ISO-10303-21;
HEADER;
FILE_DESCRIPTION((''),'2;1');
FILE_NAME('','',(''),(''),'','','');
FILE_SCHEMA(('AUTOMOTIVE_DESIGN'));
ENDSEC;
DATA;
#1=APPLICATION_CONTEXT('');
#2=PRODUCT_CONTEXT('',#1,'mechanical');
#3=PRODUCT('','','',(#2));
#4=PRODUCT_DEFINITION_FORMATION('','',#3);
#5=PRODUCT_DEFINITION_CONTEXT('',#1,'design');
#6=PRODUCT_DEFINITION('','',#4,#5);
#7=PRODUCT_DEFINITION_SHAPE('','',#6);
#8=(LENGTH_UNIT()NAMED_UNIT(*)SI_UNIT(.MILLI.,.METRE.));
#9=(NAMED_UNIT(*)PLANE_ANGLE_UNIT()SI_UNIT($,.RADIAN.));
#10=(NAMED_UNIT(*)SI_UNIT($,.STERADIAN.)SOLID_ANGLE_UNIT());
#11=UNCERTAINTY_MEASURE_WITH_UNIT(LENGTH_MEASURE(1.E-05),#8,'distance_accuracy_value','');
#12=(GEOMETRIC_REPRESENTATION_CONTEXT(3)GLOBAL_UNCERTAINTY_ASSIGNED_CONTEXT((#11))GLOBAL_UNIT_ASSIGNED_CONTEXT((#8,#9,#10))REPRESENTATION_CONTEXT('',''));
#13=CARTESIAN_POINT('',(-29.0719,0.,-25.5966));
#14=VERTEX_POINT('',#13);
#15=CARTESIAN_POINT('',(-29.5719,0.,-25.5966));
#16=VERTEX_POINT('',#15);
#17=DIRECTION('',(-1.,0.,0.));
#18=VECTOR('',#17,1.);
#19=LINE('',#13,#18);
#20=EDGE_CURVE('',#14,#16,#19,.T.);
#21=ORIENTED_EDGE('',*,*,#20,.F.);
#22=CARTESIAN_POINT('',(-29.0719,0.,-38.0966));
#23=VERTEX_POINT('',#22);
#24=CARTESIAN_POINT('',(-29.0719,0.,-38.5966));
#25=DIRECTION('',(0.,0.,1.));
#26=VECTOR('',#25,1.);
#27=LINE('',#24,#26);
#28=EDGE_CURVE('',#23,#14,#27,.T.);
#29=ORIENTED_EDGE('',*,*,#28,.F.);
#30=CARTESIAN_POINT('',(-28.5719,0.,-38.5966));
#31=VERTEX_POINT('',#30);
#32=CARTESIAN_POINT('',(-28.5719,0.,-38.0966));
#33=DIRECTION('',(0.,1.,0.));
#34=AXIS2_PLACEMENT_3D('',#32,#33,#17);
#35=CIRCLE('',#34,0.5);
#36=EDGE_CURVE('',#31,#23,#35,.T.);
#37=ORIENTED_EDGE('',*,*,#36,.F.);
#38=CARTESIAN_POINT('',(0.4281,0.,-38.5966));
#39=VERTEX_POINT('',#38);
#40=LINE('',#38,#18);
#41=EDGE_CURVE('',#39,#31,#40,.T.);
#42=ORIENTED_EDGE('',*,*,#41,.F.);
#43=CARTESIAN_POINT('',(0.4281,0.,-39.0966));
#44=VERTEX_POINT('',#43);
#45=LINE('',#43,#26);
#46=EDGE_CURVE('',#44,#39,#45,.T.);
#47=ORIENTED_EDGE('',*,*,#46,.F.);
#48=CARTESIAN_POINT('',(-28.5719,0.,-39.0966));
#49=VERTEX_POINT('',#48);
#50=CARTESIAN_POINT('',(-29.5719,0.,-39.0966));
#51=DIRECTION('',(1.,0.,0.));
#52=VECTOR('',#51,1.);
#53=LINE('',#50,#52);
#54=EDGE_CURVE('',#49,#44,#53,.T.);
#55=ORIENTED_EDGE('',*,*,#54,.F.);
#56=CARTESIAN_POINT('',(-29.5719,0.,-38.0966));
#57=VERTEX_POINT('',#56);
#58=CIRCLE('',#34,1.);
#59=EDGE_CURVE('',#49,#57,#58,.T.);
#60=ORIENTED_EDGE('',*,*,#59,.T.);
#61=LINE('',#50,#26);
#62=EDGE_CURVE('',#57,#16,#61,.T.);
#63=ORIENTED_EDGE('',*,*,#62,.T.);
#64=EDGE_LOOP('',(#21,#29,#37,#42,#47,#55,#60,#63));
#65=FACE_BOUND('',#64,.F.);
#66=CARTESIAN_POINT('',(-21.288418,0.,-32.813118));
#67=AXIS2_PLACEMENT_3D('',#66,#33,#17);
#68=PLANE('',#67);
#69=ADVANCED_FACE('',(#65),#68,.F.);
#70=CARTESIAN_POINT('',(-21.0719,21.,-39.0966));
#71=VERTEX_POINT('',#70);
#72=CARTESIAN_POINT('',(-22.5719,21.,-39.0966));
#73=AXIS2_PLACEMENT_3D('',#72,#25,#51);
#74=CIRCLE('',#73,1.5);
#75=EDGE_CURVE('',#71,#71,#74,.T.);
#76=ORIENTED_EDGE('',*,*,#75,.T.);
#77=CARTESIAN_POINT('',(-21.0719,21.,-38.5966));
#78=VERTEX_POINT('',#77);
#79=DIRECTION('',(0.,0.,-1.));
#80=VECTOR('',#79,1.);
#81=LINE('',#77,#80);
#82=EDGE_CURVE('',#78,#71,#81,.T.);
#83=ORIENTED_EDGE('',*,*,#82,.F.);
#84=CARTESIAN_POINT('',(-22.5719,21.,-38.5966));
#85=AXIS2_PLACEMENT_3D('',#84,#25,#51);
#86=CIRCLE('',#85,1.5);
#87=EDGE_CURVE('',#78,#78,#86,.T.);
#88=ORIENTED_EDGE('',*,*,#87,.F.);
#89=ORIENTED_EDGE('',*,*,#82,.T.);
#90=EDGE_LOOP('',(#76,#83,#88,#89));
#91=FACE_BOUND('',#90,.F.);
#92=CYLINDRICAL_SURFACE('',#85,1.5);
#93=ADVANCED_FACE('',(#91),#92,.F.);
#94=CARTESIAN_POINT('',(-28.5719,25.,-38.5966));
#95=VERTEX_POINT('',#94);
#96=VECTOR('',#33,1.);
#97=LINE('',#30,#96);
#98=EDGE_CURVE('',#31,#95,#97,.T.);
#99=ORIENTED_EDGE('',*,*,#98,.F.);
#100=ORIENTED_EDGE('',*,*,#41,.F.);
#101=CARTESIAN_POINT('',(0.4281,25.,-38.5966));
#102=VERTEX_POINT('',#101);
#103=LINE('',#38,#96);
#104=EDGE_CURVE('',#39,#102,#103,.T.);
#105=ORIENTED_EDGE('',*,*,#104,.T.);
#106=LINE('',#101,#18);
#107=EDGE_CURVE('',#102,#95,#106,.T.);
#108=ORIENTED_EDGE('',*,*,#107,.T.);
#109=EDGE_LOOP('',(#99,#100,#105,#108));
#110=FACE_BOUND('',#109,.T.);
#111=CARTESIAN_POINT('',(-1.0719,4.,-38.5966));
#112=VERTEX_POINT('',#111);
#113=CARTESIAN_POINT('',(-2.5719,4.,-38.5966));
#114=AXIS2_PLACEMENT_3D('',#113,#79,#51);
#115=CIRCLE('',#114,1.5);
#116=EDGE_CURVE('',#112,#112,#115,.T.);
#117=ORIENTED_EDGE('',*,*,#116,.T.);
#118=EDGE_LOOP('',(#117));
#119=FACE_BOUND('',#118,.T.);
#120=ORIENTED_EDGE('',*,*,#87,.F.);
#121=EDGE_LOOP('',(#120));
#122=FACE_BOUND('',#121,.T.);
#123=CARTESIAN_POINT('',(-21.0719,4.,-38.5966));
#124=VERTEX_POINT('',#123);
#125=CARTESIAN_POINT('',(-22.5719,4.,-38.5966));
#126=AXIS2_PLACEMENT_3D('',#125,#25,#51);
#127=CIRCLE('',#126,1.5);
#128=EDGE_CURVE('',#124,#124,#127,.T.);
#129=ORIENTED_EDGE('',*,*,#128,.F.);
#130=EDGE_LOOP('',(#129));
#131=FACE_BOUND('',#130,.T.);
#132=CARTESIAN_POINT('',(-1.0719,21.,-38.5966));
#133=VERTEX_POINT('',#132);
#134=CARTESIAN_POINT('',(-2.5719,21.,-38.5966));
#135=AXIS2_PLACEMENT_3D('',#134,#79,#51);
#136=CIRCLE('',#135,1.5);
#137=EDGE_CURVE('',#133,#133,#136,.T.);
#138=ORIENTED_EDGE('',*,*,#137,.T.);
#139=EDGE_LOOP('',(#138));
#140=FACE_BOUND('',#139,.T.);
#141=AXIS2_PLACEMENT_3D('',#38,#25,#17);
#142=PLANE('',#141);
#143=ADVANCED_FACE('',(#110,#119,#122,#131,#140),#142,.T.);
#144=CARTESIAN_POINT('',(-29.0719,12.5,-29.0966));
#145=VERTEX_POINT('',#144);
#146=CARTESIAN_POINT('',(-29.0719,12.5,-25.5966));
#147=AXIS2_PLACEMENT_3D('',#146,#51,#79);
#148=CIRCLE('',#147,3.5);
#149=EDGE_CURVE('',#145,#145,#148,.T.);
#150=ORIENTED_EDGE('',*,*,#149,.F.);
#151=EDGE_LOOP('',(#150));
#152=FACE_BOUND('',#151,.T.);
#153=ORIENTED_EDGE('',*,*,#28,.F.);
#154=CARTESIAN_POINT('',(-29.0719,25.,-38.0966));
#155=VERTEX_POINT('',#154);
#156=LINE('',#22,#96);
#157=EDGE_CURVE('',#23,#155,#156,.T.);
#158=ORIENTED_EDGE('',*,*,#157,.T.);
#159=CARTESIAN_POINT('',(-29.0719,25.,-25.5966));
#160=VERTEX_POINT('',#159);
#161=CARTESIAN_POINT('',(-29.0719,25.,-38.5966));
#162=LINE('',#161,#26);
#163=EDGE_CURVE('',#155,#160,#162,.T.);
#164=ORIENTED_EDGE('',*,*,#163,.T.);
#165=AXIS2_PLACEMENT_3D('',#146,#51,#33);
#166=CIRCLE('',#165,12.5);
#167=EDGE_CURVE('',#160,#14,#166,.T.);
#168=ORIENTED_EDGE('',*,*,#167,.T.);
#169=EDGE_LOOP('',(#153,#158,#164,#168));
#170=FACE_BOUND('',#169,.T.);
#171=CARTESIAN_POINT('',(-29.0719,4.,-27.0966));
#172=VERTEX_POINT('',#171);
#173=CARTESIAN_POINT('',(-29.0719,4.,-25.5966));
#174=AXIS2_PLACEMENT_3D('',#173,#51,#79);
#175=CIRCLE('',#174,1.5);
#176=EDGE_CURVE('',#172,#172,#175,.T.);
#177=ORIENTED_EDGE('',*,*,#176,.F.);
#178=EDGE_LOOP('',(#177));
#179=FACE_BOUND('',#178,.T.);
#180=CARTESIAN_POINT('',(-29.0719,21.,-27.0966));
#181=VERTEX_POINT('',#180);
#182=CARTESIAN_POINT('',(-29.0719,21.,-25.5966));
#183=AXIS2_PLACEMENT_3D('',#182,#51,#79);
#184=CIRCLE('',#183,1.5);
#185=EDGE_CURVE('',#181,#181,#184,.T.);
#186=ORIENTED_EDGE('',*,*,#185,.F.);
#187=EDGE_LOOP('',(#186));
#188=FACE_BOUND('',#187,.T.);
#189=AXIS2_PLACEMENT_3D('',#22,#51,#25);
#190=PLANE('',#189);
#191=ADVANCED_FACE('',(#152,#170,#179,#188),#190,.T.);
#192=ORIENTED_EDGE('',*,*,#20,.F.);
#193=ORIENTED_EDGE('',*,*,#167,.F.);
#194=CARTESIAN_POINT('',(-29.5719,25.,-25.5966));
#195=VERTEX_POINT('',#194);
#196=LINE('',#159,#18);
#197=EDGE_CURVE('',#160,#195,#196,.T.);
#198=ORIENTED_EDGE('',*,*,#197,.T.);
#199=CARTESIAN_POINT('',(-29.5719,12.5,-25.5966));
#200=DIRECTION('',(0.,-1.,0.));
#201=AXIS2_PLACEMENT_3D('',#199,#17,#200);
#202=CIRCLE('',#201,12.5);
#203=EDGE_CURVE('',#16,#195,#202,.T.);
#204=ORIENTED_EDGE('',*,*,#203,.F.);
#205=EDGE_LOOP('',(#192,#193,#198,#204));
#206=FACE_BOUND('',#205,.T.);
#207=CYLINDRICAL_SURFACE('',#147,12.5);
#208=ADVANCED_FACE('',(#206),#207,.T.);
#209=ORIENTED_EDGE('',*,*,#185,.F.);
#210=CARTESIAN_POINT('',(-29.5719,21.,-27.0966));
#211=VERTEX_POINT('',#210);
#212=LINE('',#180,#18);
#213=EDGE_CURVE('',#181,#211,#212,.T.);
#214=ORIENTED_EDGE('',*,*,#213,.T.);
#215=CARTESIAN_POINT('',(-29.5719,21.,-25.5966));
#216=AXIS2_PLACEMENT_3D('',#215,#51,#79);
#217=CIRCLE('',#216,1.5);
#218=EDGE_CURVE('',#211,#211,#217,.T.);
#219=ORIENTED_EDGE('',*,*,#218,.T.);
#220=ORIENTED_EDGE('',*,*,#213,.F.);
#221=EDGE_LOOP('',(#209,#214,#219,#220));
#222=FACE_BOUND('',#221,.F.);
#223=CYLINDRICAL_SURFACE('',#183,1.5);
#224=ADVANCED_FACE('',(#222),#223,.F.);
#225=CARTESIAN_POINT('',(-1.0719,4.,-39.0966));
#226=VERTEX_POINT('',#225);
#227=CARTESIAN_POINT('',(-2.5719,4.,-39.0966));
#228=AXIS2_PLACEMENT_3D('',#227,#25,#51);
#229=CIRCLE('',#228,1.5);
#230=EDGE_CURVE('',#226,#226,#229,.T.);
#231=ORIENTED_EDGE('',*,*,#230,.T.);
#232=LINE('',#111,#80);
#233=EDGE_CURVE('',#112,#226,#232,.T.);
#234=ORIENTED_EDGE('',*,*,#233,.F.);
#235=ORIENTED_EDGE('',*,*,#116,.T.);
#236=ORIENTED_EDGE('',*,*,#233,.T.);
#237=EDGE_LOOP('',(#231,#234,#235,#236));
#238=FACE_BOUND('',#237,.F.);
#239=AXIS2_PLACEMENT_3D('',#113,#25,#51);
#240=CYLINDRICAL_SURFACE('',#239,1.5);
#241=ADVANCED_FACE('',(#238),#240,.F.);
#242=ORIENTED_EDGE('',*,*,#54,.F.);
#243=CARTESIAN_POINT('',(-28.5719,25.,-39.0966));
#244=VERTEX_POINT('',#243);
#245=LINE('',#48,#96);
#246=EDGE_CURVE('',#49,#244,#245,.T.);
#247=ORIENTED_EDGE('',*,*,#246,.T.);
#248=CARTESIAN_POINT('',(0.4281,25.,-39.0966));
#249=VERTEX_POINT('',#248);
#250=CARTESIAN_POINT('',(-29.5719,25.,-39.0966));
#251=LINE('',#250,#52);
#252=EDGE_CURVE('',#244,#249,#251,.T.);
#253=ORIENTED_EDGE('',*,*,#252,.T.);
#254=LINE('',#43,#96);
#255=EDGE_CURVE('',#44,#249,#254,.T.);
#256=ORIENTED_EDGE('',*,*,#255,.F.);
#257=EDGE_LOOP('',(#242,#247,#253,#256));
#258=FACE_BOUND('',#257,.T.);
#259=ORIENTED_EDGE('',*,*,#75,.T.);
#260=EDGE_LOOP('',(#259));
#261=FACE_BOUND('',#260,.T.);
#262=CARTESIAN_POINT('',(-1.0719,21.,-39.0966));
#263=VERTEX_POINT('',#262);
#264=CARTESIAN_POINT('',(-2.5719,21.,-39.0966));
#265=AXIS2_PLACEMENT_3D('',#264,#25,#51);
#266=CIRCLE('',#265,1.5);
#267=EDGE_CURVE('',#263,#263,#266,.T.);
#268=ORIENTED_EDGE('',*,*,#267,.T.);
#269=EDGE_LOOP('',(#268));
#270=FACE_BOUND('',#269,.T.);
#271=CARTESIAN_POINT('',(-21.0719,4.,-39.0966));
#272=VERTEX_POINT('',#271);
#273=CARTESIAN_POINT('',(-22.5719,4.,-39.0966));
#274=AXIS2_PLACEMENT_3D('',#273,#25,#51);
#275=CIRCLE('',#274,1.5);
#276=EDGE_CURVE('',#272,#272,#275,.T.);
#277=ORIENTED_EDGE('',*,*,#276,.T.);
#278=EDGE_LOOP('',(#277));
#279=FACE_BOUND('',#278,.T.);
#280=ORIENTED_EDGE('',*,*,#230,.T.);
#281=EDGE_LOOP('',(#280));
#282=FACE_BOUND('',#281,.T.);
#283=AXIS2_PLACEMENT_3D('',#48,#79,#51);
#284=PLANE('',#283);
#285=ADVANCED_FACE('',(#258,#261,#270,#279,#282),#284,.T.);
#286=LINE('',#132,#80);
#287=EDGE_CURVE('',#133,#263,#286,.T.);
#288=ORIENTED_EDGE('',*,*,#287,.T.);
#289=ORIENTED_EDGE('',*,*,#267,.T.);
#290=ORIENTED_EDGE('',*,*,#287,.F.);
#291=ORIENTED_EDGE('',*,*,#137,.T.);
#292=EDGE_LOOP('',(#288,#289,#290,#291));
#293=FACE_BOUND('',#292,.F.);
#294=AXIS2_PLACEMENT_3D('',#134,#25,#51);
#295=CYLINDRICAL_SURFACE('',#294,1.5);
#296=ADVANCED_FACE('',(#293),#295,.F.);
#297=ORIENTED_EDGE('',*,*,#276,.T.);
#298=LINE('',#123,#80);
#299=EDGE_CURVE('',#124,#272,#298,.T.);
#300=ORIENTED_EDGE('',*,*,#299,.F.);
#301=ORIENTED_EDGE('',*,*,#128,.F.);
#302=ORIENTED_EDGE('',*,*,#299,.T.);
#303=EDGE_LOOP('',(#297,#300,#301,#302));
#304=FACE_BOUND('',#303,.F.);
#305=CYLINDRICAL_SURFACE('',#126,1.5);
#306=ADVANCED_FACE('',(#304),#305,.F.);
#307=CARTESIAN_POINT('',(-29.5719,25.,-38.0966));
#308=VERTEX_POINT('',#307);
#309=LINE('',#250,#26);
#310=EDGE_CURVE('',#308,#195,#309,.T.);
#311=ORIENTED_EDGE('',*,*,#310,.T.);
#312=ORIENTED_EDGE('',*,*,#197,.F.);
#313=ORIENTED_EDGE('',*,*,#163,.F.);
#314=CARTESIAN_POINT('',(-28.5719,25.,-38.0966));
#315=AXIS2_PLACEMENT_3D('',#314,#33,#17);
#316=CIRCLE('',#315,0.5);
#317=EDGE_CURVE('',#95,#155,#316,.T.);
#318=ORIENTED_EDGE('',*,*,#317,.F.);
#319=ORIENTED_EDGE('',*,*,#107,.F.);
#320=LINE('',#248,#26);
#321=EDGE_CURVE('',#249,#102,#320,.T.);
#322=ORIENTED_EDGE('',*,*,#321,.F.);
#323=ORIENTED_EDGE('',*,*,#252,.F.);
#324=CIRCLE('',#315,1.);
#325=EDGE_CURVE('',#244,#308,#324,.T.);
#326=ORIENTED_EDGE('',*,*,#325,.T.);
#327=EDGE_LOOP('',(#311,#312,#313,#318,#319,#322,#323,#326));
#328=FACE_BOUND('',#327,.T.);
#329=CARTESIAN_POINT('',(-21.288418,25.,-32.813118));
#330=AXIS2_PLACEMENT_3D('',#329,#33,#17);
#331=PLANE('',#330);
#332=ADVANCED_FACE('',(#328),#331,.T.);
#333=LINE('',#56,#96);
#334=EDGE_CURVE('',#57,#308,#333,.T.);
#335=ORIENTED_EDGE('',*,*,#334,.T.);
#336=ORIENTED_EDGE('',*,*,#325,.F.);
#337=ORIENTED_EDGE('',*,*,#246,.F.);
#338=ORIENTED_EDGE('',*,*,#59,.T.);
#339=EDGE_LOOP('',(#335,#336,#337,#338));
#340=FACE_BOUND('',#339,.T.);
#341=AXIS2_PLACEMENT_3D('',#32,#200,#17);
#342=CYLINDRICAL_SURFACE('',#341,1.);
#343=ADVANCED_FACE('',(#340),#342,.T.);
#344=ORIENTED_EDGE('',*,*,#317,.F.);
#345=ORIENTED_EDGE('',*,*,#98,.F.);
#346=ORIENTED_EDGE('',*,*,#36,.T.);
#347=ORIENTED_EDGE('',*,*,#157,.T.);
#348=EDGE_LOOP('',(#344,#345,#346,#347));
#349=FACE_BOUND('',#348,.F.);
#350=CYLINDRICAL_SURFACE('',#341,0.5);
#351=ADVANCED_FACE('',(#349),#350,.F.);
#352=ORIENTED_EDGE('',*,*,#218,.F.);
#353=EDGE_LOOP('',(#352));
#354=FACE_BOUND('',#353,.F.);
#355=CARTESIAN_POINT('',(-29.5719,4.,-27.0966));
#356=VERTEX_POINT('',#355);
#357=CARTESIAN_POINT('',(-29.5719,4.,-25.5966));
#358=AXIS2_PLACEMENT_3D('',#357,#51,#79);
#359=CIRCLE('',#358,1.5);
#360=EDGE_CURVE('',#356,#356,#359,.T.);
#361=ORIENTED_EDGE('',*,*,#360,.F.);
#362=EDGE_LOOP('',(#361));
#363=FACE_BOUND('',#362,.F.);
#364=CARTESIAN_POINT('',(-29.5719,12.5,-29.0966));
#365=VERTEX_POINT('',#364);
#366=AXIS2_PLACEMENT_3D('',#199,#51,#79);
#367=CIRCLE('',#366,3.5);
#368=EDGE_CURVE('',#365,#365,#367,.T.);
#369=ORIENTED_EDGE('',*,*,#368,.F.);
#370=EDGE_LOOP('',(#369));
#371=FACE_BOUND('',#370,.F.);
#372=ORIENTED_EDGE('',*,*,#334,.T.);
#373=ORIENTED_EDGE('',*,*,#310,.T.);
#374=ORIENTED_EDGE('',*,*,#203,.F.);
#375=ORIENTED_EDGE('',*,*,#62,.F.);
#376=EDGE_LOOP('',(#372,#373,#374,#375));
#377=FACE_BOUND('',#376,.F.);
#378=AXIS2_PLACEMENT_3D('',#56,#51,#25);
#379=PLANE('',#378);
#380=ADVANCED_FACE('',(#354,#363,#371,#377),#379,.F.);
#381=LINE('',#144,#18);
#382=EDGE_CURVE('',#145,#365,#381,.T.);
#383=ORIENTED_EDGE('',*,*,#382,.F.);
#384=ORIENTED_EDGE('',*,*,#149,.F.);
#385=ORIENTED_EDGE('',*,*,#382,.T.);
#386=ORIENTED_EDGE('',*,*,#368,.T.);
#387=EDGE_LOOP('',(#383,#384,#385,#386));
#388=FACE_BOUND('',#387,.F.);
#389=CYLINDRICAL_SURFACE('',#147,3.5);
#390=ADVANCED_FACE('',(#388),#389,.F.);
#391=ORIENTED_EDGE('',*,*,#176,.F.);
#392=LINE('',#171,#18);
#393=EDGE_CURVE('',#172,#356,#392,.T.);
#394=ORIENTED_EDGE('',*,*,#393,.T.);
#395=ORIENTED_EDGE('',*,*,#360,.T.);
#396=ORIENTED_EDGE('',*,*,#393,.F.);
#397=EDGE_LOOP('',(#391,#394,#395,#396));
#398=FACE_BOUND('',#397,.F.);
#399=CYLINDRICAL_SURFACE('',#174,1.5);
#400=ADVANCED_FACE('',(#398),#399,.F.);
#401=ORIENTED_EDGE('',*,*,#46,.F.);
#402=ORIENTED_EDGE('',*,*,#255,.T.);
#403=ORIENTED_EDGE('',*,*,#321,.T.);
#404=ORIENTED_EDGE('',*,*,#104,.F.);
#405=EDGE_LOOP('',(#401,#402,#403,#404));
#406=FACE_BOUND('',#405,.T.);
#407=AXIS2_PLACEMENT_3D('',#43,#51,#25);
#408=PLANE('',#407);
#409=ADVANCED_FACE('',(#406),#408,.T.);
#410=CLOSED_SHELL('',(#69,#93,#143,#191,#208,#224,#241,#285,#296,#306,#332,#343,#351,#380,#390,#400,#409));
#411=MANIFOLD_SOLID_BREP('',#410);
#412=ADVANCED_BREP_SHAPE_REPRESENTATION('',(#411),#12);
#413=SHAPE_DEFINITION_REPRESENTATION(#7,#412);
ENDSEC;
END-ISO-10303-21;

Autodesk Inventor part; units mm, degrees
ref_plane "YZ Plane" through (0, 0, 0) normal (1, 0, 0) x (0, 1, 0)
ref_plane "XZ Plane" through (0, 0, 0) normal (0, 1, 0) x (-1, 0, 0)
ref_plane "XY Plane" through (0, 0, 0) normal (0, 0, 1) x (1, 0, 0)
sketch "草圖1" plane through (0, 0, 0) normal (0, 1, 0) x (-1, 0, 0)
  line L0 (29.5719, -39.0966) -> (29.5719, -13.0966)
  line L1 (29.5719, -39.0966) -> (-0.4281, -39.0966)
  point P0 (0, 0)
  dimension "d0" = 26
  dimension "d2" = 90
  dimension "d3" = 30
contour flange "輪廓線凸緣1" sketch "草圖1" thickness 0.5 bend radius 0.5 width 25 along (0, 1, 0) mid plane no both sides no wall seen from (-29.5719, 0, -26.0966) lies toward (1, 0, 0) curves L0 L1
bend "折彎1"
corner "轉角1"
sketch "草圖2" plane through (-29.0719, 0, -13.0966) normal (1, 0, 0) x (0, 0, -1)
  circle A0 centre (12.5, 12.5) radius 12.5
  line L0 (0, 25) -> (25, 25) projected
  line L1 (0, 0) -> (0, 25) projected
  line L2 (0, 0) -> (25, 0) projected
  point P0 (-13.0966, 0)
  point P1 (0, 12.5)
  point P2 (12.5, 25)
  point P3 (12.5, 0)
  dimension "d15" = 25
extrude "擠出1" cut sketch "草圖2" against normal up to surface (0.5 mm away) contours A0 L1 L0 | L2 L1 A0
sketch "草圖3" plane through (-29.0719, 0, -38.0966) normal (1, 0, 0) x (0, 0, -1)
  arc A0 (-12.5, 25) -> (-12.5, 0) centre (-12.5, 12.5) ccw projected
  circle A1 centre (-12.5, 21) radius 1.5
  circle A2 centre (-12.5, 4) radius 1.5
  point P0 (-38.0966, 0)
  dimension "d18" = 3
  dimension "d19" = 17
  dimension "d20" = 8.5
  dimension "d21" = 3
extrude "擠出2" cut sketch "草圖3" against normal up to surface (0.5 mm away)
sketch "草圖4" plane through (0.4281, 0, -38.5966) normal (0, 0, 1) x (1, 0, 0)
  circle A0 centre (-23, 21) radius 1.5
  circle A1 centre (-3, 21) radius 1.5
  circle A2 centre (-23, 4) radius 1.5
  circle A3 centre (-3, 4) radius 1.5
  line L0 (0, 0) -> (0, 25) projected
  line L1 (-3, 21) -> (-3, 4)
  line L2 (-3, 12.5) -> (-13.1347, 12.5)
  line L3 (-29, 25) -> (0, 25) projected
  point P0 (-0.4281, 0)
  dimension "d24" = 20
  dimension "d25" = 3
  dimension "d26" = 3
  dimension "d27" = 3
  dimension "d28" = 3
  dimension "d29" = 17
  dimension "d30" = 3
  dimension "d31" = 12.5
extrude "擠出3" cut sketch "草圖4" against normal up to surface (0.5 mm away)
sketch "草圖5" plane through (-29.0719, 0, -38.0966) normal (1, 0, 0) x (0, 0, -1)
  arc A0 (-12.5, 25) -> (-12.5, 0) centre (-12.5, 12.5) ccw projected
  circle A1 centre (-12.5, 12.5) radius 3.5
  point P0 (-38.0966, 0)
  dimension "d34" = 7
extrude "擠出4" cut sketch "草圖5" against normal up to surface (0.5 mm away)
equation "\"d4\" = 厚度"
equation "\"d5\" = 折彎離隙寬度"
equation "\"d6\" = 折彎離隙深度"
equation "\"d7\" = 最小剩餘"
equation "\"d8\" = 轉移半徑"
equation "\"d10\" = 折彎半徑"
equation "\"d12\" = 轉角離隙大小"
equation "\"d13\" = 間隙大小"
equation "\"d14\" = Jacobi半徑大小"
equation "\"折彎半徑\" = 厚度"
equation "\"折彎離隙寬度\" = 厚度"
equation "\"折彎離隙深度\" = 0.5 * 厚度"
equation "\"轉角離隙大小\" = 4 * 厚度"
equation "\"最小剩餘\" = 2 * 厚度"
equation "\"轉移半徑\" = 折彎半徑"
equation "\"Jacobi半徑大小\" = 折彎半徑"
equation "\"間隙大小\" = 厚度"
equation "\"厚度\" = 0.5"
properties part number "motor_base"
